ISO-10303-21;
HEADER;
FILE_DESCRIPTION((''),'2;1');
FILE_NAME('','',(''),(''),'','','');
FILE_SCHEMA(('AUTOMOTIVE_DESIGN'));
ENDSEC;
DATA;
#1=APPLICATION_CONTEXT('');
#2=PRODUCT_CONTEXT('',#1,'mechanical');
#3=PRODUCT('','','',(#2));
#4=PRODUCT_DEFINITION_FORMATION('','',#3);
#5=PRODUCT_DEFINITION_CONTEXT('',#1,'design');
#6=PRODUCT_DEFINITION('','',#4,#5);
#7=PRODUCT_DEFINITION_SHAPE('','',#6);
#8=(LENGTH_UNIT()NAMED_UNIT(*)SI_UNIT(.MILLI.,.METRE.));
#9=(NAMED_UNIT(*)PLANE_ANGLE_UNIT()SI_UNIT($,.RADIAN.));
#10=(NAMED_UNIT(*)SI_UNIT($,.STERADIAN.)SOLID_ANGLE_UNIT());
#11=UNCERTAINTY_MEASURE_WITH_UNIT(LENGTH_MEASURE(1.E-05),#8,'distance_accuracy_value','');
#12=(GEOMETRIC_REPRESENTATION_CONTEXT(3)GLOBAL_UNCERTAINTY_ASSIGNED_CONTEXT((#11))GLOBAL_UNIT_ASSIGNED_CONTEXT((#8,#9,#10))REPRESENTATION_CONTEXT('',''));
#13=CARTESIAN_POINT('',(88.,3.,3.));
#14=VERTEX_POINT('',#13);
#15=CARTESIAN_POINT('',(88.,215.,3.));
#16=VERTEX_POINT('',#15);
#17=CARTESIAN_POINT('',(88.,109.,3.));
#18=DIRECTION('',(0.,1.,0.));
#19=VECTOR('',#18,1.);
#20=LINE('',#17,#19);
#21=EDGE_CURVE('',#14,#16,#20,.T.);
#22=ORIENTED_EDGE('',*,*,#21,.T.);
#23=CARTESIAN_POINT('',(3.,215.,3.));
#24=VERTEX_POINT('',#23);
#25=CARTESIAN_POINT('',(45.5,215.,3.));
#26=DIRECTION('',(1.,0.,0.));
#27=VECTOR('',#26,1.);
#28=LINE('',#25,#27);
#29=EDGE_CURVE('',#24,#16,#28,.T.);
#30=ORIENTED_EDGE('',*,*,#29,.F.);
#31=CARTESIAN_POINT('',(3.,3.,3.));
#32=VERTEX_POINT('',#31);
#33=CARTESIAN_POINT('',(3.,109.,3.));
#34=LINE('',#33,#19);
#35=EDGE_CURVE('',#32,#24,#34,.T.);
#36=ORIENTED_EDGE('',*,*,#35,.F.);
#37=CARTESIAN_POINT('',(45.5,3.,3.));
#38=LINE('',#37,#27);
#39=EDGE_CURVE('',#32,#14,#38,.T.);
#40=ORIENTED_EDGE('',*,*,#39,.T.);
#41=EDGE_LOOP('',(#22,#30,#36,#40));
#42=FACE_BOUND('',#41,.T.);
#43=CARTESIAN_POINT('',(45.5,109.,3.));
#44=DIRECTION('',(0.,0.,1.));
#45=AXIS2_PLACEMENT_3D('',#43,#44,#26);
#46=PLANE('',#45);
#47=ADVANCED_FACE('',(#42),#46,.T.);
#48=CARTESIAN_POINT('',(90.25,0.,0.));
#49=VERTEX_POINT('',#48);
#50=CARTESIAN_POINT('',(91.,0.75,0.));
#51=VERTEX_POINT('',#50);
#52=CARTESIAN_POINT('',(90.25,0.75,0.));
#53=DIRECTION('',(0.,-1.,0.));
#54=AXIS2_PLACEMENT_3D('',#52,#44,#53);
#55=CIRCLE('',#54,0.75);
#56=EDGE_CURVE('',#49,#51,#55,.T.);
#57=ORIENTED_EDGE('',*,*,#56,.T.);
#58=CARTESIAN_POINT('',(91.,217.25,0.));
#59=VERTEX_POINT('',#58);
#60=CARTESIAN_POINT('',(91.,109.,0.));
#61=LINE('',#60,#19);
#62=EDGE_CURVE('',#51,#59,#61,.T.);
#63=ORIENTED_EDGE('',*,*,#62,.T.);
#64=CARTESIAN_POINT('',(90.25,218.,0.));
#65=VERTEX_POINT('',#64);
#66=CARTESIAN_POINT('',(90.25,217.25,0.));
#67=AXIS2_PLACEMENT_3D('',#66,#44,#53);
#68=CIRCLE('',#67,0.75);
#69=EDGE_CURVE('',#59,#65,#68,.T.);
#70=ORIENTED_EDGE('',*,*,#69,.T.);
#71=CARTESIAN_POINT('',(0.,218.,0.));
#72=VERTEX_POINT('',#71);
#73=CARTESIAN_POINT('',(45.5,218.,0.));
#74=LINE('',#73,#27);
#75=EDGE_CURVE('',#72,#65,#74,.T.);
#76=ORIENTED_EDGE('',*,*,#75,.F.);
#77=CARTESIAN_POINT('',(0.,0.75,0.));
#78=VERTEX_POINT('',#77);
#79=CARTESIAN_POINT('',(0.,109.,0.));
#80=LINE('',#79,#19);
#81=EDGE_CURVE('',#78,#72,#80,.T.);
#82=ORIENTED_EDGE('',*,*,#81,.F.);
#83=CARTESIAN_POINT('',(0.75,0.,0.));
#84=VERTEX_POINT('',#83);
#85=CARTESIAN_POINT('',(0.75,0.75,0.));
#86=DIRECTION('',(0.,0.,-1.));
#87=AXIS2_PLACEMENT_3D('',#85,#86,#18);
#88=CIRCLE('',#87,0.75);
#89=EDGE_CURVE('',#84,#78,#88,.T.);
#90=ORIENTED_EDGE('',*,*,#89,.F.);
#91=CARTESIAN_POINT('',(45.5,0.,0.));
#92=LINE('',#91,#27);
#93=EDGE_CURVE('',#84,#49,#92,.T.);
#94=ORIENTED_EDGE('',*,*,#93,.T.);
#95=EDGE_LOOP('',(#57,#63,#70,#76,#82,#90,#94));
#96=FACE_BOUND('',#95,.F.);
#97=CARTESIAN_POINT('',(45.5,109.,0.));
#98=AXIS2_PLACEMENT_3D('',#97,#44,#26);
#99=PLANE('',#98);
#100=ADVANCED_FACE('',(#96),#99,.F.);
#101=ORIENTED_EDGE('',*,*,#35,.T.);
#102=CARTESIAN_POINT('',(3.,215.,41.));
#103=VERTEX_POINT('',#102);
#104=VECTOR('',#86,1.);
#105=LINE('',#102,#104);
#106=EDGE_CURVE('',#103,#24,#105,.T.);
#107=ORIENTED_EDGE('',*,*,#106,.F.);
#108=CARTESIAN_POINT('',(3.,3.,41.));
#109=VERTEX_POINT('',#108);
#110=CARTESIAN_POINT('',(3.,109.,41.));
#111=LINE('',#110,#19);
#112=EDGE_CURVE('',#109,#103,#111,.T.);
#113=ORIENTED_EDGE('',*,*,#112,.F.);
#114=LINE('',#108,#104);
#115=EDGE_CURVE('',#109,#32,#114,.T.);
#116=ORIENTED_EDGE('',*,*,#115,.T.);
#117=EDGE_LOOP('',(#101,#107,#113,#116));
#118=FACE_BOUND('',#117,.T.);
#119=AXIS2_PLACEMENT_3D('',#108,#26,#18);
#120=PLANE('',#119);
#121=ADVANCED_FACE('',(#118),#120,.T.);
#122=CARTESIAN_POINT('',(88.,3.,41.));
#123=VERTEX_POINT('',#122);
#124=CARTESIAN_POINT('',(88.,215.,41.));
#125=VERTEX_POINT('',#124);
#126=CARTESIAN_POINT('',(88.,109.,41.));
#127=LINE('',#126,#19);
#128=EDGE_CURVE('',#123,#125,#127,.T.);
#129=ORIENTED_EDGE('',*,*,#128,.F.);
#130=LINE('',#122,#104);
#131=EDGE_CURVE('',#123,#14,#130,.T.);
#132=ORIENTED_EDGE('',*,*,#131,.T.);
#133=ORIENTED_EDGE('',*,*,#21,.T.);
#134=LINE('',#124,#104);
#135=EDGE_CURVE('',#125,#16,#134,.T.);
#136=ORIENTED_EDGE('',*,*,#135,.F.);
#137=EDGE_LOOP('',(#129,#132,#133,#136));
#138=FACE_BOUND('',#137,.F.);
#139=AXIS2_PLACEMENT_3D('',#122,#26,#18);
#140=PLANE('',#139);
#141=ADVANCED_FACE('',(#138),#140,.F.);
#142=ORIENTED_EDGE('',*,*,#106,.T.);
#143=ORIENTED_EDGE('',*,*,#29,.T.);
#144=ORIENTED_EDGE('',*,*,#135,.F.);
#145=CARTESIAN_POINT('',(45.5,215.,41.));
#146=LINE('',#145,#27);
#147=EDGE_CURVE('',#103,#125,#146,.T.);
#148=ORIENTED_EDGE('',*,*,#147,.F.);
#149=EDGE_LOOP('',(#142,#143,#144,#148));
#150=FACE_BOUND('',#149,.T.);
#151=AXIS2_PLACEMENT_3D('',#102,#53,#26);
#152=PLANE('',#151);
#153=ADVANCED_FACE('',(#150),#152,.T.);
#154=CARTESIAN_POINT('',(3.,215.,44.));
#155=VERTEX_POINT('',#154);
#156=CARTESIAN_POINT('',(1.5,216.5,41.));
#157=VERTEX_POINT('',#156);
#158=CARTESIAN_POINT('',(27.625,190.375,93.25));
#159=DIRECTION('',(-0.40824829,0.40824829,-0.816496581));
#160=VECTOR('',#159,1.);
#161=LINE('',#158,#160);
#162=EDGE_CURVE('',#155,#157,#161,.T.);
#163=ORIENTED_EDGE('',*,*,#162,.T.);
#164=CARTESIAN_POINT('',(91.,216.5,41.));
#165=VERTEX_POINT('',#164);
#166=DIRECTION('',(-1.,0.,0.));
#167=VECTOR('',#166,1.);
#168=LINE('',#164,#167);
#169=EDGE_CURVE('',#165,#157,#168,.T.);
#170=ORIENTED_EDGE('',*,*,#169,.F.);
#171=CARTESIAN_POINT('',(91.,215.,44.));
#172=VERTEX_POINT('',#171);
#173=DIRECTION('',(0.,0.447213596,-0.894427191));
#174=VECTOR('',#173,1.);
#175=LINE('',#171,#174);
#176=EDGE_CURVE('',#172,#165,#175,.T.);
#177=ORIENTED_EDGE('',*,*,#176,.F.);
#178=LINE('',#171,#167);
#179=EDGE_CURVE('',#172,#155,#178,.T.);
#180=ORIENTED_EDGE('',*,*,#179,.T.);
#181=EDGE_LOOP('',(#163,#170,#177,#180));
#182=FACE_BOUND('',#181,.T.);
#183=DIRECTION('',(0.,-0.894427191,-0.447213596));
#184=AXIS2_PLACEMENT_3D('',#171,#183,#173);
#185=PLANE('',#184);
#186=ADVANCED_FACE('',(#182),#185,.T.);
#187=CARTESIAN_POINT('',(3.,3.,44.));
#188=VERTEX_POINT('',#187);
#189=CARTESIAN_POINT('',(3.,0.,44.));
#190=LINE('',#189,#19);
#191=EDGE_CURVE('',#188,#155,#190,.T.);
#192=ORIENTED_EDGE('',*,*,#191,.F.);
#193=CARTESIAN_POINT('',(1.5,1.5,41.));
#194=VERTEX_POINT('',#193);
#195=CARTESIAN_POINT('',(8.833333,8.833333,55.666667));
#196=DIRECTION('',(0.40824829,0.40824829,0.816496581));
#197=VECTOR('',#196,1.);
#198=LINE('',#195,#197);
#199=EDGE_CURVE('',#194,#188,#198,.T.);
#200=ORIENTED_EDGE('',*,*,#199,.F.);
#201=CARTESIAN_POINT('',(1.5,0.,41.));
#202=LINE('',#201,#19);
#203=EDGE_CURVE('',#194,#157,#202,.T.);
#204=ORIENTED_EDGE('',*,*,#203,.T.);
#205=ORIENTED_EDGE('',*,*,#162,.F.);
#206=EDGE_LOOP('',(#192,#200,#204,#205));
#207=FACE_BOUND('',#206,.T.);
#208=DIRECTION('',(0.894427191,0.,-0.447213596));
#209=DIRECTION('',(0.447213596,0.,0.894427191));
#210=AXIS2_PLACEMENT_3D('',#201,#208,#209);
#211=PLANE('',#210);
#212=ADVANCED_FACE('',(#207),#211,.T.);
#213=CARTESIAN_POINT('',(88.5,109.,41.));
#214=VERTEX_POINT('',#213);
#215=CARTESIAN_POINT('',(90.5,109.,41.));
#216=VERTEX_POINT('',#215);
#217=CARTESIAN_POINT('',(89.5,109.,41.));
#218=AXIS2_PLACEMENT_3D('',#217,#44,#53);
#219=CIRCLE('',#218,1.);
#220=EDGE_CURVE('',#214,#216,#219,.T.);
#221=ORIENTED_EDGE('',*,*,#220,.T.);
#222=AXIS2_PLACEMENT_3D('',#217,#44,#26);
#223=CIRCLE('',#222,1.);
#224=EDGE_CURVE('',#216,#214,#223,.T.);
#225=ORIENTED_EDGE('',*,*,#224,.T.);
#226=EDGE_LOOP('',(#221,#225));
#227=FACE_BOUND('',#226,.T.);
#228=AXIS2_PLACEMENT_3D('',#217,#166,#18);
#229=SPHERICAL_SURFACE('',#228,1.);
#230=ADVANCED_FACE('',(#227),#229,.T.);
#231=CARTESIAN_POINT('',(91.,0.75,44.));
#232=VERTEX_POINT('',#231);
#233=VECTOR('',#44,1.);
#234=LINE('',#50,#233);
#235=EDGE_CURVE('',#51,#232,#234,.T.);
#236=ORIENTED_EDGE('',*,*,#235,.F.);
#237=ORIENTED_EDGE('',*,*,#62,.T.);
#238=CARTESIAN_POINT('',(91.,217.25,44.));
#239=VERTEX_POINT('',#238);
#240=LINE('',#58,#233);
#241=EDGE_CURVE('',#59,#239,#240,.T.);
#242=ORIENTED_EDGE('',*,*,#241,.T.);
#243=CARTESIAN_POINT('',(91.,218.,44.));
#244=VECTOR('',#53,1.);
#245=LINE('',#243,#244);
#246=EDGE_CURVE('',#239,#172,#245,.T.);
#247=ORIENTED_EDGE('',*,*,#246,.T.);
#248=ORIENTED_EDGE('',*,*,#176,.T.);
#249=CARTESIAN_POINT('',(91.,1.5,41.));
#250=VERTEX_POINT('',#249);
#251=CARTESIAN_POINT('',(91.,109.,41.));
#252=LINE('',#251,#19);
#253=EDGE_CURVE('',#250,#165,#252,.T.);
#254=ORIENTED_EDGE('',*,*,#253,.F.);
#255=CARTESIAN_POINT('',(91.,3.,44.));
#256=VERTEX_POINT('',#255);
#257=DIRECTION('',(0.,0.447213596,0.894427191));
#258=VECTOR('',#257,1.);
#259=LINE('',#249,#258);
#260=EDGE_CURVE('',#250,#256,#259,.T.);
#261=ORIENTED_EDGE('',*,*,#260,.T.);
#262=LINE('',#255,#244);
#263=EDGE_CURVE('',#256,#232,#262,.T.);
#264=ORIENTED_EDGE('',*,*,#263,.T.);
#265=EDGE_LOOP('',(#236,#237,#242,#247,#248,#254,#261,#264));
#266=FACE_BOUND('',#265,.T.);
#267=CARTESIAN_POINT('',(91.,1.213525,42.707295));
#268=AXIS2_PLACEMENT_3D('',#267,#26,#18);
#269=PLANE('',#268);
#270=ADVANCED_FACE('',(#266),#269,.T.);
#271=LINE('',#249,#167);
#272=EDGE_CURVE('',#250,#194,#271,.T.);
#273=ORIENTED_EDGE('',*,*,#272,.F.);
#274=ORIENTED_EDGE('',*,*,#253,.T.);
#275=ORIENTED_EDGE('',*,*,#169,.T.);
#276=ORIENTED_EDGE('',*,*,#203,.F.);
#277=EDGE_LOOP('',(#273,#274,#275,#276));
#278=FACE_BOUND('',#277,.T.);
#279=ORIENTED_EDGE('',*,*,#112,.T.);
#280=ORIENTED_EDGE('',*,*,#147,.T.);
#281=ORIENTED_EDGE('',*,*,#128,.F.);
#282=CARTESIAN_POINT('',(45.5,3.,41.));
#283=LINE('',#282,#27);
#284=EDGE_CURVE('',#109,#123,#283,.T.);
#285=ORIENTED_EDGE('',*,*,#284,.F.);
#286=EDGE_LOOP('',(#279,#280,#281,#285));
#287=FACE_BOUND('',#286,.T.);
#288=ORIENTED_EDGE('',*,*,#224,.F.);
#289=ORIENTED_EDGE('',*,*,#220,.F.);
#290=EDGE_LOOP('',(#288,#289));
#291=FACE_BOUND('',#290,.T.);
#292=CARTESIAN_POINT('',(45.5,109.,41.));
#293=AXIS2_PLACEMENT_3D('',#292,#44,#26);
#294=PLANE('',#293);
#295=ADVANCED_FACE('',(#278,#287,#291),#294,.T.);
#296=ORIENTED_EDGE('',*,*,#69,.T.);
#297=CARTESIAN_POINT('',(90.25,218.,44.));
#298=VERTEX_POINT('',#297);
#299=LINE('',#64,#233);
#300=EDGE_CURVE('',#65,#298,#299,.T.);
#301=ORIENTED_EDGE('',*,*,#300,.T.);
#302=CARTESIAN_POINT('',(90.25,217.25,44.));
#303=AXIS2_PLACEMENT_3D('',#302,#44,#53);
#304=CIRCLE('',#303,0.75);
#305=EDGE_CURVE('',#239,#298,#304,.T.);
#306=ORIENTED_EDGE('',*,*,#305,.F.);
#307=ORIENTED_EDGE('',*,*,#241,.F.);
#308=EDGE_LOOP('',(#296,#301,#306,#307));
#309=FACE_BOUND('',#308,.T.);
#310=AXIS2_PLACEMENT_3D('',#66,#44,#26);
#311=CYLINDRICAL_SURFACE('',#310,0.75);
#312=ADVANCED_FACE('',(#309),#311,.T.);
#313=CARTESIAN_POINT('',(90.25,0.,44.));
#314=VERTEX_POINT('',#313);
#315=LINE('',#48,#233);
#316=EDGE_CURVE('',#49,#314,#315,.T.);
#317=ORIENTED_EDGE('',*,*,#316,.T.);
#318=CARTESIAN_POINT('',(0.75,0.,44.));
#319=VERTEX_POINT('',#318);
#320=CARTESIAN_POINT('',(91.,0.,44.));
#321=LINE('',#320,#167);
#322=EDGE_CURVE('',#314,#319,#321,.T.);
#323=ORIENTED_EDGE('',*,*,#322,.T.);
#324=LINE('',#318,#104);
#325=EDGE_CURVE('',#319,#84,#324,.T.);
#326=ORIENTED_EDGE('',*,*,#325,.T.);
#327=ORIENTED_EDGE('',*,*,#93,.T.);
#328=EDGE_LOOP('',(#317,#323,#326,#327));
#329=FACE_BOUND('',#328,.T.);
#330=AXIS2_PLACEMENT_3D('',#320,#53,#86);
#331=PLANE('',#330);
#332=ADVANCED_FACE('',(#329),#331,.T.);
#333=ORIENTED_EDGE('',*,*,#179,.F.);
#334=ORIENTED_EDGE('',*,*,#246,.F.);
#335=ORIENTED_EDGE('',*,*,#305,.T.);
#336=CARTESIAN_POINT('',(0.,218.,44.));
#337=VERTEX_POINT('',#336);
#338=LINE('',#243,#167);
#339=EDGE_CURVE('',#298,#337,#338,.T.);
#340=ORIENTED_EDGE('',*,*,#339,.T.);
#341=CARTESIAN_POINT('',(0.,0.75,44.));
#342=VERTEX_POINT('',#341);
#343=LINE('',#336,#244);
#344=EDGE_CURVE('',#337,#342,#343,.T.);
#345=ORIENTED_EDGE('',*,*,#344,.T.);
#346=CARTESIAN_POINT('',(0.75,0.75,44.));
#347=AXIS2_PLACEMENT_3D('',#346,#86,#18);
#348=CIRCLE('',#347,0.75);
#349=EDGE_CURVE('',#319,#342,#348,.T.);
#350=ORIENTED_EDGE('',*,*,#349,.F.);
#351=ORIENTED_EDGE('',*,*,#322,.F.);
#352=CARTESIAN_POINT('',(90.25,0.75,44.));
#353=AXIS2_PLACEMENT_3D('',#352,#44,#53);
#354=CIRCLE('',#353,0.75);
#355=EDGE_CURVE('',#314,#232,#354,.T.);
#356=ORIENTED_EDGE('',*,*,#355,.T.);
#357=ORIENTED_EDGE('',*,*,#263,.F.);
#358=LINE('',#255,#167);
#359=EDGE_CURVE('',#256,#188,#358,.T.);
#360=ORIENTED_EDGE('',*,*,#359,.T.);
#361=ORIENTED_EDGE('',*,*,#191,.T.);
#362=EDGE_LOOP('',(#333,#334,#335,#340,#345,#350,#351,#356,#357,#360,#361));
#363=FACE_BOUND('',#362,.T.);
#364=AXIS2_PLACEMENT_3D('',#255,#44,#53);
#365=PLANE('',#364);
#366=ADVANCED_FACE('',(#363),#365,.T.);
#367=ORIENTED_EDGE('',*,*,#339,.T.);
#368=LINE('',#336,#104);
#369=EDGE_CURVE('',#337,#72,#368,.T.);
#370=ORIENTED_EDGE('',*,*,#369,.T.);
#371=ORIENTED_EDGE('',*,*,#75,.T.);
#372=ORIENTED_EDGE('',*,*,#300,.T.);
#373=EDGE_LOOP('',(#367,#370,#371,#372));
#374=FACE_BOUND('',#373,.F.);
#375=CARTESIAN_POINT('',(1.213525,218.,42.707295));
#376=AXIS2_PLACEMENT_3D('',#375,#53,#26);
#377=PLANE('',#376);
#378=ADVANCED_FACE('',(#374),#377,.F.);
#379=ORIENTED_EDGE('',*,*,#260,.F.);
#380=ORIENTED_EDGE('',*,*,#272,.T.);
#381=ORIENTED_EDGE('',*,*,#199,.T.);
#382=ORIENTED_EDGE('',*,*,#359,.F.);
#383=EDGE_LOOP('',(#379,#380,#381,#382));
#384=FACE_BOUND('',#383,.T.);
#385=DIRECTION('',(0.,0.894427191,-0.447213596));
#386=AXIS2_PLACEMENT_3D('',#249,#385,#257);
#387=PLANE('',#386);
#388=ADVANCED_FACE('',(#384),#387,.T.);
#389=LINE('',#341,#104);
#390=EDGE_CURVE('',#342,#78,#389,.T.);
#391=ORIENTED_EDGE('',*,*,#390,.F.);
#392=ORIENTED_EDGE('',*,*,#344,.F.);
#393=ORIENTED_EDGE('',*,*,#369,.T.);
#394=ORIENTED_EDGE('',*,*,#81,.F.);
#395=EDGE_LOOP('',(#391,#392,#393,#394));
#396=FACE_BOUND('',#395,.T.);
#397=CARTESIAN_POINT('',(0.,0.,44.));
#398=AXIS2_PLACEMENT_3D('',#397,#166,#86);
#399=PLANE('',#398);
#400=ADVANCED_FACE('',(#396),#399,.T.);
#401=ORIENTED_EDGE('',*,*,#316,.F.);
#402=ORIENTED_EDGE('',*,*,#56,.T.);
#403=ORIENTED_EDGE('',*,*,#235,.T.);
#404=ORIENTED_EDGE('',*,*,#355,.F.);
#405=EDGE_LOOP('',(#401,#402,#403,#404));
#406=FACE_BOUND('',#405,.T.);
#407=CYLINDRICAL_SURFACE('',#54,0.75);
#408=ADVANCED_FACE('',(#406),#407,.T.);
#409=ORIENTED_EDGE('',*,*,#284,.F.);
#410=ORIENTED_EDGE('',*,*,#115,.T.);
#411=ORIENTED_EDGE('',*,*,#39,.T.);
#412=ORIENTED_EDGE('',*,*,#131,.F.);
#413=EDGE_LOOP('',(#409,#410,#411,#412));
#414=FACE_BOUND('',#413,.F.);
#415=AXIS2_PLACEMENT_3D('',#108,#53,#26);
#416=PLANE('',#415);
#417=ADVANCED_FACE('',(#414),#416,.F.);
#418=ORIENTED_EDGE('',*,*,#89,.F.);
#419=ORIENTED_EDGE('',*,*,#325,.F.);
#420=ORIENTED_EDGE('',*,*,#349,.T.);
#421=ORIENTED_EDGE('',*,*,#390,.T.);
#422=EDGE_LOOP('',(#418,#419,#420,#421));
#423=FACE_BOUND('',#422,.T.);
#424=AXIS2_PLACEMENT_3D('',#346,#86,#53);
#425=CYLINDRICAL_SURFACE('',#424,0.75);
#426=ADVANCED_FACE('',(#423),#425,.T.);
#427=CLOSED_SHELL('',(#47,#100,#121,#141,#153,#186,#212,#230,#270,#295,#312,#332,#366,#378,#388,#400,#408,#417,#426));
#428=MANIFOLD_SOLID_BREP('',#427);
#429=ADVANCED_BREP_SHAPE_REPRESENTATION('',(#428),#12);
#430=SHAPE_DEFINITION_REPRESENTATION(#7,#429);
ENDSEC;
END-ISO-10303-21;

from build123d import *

# Parameters (mm, degrees)
F4_W      = 91
F4_H      = 218
F5_DEPTH  = 41
F8_DEPTH  = 218
F9_DEPTH  = 91
F10_W     = 85
F10_H     = 212
F11_DEPTH = 38
F12_R     = 0.75


with BuildPart() as f5:
    # F4 (on Top) → F5 (new body)
    with BuildSketch(Plane.XY):
        with Locations((45.5, 109)):
            Rectangle(F4_W, F4_H)
    extrude(amount=F5_DEPTH)

    # F7 (on face) → F8 (join)
    with BuildSketch(Plane.XZ):
        Polygon((0, 44), (0, 41), (1.5, 41), (3, 44), align=None)
    extrude(amount=-F8_DEPTH)

    # F6 (on face) → F9 (join)
    with BuildSketch(Plane.YZ.offset(91)):
        Polygon((0, 44), (0, 41), (1.5, 41), (3, 44), align=None)
        Polygon((216.5, 41), (218, 41), (218, 44), (215, 44), align=None)
    extrude(amount=-F9_DEPTH)

    # F10 (on face) → F11 (cut)
    with BuildSketch(Plane.XY.offset(41)):
        with Locations((45.5, 109)):
            Rectangle(F10_W, F10_H)
    extrude(amount=-F11_DEPTH, mode=Mode.SUBTRACT)

    # F12
    f12_edges = [f5.edges().sort_by_distance(p)[0] for p in [
        (91, 0, 22),
        (91, 218, 22),
        (0, 0, 22),
    ]]
    fillet(f12_edges, radius=F12_R)

    # F13 (on face) → F14 (revolve)
    with BuildSketch(Plane.XY.offset(41)):
        with BuildLine():
            Line((88.5, 109), (90.5, 109))
            ThreePointArc((90.5, 109), (89.5, 110), (88.5, 109))
        make_face()
    revolve(axis=Axis((24.0288835471, 109, 41), (-1, 0, 0)))


solid = f5.part
